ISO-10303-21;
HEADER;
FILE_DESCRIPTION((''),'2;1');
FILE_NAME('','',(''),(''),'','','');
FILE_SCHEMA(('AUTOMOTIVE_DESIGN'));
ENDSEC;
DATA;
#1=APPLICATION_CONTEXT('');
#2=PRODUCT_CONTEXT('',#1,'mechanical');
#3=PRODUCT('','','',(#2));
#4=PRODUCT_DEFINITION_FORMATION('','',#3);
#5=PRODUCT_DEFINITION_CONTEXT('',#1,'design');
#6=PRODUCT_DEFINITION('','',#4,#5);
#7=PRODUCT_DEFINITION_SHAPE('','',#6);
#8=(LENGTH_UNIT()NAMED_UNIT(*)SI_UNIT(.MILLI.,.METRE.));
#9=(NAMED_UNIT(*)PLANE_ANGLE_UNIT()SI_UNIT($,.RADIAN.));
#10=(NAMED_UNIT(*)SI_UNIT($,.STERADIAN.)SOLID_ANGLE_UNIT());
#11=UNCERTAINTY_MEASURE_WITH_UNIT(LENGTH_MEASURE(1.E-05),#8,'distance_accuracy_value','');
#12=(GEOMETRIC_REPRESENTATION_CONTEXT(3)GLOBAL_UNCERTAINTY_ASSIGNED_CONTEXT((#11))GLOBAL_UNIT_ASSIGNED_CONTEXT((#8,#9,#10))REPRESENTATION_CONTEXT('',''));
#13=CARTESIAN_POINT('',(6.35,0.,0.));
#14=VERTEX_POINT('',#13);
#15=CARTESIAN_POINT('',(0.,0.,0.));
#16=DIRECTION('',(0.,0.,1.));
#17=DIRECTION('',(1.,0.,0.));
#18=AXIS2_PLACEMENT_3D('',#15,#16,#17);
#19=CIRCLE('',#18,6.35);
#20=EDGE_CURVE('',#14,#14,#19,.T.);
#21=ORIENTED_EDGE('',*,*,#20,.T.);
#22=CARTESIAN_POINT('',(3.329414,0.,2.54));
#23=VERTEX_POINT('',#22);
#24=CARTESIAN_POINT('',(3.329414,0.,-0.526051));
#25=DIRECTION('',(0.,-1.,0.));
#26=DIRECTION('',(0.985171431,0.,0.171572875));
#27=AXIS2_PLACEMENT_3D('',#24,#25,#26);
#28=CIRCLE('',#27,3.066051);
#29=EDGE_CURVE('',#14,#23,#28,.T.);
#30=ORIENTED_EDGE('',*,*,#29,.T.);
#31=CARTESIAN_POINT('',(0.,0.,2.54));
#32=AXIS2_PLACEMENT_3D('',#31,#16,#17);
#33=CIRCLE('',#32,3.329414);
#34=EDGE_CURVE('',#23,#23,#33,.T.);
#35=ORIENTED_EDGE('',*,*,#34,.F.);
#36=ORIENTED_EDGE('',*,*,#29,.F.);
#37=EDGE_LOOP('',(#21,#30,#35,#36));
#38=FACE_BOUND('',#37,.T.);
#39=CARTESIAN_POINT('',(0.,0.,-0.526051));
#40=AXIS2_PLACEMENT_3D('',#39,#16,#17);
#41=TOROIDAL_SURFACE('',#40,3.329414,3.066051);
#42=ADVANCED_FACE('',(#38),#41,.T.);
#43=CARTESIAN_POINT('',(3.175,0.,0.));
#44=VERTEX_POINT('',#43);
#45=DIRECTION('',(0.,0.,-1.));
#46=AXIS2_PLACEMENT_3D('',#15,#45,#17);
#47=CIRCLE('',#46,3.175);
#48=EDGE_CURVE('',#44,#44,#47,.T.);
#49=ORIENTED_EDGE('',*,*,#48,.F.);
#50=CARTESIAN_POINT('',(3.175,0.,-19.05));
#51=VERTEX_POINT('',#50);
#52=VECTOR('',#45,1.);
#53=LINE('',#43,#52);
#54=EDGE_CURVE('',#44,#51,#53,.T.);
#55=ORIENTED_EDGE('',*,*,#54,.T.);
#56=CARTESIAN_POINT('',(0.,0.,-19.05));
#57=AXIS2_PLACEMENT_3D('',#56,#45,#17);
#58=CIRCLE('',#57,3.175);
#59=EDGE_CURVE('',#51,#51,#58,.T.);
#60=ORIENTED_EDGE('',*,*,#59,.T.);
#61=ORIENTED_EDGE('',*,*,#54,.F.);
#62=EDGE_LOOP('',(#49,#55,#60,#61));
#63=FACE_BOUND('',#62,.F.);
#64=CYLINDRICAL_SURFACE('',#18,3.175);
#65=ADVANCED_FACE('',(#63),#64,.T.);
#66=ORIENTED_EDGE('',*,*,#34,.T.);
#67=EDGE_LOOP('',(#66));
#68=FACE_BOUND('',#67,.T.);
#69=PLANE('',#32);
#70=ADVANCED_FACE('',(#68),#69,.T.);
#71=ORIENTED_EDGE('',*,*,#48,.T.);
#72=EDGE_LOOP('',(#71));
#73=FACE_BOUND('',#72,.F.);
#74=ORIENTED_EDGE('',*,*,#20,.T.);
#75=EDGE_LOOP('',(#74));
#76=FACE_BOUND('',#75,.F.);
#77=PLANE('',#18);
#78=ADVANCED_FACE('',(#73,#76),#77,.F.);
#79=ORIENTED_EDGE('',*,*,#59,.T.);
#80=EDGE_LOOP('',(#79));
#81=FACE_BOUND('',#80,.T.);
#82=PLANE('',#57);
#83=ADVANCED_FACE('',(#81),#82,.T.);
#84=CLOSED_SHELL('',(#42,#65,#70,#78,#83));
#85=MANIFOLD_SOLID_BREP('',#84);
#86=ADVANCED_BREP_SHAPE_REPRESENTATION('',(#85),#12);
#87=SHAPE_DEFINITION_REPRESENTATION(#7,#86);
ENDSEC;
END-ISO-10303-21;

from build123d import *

# Parameters (mm, degrees)
F0_R     = 6.35
F1_DEPTH = 2.54
F3_R     = 3.175
F4_DEPTH = 19.05


# Not quite as in the source:
# - a fillet or chamfer that OpenCascade refuses, or shapes differently, is made with other operations: its cross-section is extruded or revolved along the edge and cut away or added


with BuildPart() as f1:
    # F0 (on Top) → F1 (new body)
    with BuildSketch(Plane.XY):
        Circle(F0_R)
    extrude(amount=F1_DEPTH)

    # F2: fillet of radius 3.0660512242 on 1 edges, made by hand

    # F2_s1 → F2_t2 (revolve, cut)
    with BuildSketch(Plane.XZ):
        with BuildLine():
            ThreePointArc((6.35, 0), (5.3027068749, 1.8206027884), (3.3294139279, 2.54))
            Line((3.3294139279, 2.54), (6.35, 2.54))
            Line((6.35, 2.54), (6.35, 0))
        make_face()
    revolve(axis=Axis((0, 0, 2.54), (0, 0, 1)), mode=Mode.SUBTRACT)

    # F3 (on face) → F4 (join)
    with BuildSketch(Plane(origin=(0, 0, 0), x_dir=(1, 0, 0), z_dir=(0, 0, -1))):
        Circle(F3_R)
    extrude(amount=F4_DEPTH)


solid = f1.part
